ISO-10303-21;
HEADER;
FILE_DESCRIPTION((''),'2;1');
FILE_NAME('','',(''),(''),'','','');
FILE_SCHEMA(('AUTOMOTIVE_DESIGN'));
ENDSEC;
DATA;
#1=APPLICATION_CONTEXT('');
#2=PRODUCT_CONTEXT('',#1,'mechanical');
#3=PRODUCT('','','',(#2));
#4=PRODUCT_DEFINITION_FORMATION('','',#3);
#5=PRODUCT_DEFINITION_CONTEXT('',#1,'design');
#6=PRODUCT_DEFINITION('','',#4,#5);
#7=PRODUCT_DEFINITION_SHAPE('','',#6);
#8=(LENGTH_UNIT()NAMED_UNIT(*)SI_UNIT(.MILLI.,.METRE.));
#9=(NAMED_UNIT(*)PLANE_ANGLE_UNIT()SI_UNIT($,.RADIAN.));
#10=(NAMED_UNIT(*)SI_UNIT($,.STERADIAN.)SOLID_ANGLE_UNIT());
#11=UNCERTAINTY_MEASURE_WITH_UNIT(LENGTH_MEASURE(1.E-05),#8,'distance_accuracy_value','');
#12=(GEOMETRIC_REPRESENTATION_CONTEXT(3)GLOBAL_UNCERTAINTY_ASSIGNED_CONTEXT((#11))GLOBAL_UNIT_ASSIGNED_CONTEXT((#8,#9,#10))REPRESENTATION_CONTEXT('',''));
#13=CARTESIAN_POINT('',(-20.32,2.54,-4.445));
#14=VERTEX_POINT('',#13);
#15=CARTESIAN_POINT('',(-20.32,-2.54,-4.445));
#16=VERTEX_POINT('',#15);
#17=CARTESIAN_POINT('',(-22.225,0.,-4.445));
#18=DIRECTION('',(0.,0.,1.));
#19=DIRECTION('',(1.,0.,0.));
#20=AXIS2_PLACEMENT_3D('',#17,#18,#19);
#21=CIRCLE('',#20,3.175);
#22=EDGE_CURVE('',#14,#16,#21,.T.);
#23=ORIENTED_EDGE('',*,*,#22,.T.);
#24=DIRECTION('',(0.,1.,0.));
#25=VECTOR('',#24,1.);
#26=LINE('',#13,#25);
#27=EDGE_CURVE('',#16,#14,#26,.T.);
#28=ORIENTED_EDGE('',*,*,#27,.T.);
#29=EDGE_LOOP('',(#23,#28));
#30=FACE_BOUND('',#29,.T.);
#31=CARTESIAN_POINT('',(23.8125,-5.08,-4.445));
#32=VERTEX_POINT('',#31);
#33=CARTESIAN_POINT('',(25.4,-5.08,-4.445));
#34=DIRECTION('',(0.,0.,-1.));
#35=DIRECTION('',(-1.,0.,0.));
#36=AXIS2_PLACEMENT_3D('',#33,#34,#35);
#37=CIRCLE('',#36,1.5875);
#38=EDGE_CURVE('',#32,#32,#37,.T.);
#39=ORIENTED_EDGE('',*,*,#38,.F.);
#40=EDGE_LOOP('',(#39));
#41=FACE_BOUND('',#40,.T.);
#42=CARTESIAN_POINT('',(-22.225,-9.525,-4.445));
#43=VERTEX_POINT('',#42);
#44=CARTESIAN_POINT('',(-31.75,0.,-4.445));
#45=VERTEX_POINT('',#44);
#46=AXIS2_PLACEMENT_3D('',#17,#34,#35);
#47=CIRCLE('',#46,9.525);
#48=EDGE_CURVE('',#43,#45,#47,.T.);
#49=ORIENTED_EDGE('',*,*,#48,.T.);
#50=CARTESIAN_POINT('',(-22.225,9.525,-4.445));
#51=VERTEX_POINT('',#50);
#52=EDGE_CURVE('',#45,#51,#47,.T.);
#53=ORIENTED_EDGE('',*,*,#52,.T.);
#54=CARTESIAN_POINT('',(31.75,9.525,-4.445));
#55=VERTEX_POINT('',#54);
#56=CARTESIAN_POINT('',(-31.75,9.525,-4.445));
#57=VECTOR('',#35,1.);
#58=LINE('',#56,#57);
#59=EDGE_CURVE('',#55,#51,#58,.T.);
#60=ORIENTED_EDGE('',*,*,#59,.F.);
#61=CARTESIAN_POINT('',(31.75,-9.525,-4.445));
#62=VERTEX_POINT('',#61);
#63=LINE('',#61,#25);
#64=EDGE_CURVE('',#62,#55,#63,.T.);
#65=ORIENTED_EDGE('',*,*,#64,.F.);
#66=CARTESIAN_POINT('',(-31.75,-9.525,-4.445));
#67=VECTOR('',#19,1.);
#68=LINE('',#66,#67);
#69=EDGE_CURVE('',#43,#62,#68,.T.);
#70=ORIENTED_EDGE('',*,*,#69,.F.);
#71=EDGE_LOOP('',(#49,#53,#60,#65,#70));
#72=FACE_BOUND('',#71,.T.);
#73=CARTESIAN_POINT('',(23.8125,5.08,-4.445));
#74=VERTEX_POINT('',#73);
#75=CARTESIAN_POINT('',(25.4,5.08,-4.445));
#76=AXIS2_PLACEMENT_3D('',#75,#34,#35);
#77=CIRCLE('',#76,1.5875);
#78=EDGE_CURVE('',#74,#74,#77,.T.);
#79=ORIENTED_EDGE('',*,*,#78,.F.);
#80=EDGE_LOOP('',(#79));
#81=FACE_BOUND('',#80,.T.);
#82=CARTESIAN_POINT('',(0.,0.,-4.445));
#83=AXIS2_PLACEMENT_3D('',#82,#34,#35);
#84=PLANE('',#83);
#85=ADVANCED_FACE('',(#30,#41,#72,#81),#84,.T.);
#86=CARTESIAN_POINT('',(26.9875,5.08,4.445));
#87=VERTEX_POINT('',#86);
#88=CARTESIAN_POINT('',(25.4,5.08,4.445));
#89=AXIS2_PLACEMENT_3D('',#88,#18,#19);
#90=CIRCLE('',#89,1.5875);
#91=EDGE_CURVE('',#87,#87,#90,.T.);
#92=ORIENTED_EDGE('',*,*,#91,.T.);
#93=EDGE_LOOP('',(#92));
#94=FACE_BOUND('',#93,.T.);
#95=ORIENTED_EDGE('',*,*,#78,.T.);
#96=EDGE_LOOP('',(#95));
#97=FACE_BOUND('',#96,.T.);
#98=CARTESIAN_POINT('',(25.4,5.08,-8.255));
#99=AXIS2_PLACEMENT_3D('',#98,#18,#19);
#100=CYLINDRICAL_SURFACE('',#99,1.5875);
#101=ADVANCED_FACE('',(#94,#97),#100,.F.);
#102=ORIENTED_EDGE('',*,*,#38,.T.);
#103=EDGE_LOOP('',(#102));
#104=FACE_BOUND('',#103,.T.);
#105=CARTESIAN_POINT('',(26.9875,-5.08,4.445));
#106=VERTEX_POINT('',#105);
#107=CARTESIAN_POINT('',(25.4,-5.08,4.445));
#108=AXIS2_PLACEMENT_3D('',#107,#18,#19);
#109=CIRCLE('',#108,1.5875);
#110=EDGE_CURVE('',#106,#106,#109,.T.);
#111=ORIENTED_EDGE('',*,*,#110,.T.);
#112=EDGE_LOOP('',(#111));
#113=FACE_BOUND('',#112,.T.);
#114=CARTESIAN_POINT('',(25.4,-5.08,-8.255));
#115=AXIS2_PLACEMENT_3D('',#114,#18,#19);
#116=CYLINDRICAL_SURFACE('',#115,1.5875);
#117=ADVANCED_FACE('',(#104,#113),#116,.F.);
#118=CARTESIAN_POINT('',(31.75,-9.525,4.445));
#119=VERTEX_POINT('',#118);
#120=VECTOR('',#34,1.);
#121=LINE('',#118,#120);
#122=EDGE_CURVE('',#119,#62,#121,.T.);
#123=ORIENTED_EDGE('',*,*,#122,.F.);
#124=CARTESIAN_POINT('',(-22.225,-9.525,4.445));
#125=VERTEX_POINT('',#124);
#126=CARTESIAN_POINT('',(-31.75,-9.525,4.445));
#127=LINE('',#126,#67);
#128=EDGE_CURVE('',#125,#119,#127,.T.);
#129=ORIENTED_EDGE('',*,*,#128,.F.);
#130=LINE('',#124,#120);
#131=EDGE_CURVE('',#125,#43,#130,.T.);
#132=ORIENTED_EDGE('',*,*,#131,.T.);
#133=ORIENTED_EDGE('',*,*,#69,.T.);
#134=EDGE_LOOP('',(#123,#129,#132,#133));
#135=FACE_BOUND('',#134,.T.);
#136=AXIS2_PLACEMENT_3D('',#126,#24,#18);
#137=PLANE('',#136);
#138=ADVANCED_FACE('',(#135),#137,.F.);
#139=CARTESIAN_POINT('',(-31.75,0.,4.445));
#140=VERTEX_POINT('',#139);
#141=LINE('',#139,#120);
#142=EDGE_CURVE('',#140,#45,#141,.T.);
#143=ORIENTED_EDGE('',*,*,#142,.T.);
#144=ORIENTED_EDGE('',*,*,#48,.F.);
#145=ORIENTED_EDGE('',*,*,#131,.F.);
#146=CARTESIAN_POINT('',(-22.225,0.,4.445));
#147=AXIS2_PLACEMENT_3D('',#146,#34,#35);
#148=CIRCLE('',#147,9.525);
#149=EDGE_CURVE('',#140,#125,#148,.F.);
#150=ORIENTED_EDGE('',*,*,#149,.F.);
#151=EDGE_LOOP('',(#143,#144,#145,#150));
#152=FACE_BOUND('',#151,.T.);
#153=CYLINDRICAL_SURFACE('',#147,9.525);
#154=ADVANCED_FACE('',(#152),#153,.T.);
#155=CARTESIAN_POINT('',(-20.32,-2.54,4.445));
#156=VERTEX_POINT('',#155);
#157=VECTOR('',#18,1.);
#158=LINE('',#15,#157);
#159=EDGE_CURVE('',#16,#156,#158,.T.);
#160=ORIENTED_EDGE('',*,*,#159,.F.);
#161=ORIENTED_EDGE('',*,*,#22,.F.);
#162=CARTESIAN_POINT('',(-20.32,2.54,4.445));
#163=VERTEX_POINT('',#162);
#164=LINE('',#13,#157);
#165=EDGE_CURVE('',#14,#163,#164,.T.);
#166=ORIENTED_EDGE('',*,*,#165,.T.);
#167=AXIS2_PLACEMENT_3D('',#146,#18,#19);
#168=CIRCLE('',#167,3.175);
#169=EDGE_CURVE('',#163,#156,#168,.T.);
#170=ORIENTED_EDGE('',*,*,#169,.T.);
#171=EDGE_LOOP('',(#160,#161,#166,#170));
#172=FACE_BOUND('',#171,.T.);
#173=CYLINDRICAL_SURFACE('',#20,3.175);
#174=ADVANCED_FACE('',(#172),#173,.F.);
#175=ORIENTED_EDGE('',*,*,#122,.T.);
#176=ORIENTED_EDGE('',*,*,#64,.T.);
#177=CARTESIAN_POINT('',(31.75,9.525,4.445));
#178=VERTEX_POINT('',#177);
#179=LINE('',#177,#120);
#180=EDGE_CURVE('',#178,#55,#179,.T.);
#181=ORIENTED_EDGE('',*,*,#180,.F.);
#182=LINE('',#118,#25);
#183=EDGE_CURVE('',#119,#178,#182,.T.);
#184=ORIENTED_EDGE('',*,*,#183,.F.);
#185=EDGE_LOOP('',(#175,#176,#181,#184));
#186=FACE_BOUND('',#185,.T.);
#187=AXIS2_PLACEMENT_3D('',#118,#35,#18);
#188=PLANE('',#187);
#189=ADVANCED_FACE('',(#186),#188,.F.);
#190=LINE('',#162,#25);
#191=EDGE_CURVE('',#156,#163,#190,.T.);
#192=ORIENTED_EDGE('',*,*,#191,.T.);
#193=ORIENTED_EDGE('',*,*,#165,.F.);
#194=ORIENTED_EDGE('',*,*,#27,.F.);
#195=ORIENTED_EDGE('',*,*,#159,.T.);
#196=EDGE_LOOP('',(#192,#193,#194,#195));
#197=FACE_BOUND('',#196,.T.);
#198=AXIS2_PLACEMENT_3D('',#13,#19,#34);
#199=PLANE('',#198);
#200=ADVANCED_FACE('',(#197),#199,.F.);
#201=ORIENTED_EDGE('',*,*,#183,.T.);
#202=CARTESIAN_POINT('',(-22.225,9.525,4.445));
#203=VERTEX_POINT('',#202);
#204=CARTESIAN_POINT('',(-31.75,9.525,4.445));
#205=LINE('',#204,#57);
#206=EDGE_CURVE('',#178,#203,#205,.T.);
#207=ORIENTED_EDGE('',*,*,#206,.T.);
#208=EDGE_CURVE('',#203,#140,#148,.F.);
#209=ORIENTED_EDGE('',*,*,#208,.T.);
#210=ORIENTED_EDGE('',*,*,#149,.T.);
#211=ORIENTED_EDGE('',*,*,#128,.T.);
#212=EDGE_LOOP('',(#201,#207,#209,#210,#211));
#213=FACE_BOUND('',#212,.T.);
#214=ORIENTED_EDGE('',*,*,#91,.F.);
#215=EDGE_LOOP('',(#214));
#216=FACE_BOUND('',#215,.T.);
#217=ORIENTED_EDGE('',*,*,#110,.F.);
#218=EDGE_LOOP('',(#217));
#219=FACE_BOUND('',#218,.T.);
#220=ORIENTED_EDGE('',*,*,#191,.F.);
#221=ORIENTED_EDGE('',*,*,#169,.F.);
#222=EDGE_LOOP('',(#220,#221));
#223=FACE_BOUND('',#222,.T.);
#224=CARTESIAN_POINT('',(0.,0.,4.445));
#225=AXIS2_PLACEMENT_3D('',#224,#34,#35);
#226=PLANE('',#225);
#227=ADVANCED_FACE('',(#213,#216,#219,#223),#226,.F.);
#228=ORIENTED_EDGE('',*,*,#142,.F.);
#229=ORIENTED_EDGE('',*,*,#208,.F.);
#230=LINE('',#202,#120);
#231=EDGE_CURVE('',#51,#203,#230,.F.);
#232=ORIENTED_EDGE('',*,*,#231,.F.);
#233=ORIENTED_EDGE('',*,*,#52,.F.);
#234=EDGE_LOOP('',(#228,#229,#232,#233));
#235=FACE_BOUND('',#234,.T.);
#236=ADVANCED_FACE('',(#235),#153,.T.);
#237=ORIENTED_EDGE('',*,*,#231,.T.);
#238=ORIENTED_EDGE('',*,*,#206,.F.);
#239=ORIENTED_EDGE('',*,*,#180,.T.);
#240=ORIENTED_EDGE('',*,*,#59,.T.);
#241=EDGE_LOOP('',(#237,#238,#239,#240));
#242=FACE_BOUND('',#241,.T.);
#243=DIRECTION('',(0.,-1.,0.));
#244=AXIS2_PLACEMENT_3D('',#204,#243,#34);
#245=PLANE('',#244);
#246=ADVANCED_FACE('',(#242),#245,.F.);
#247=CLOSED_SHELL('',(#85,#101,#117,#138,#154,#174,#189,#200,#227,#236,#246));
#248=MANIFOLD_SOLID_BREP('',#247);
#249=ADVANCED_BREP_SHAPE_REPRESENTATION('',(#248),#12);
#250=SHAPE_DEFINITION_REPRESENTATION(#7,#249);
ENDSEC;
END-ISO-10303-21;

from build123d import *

# Parameters (mm, degrees)
SKETCH1_W               = 63.5
SKETCH1_H               = 19.05
BOSS_EXTRUDE1_DEPTH     = 4.445
SKETCH2_R               = 1.5875
CUT_EXTRUDE1_DEPTH      = 12.7
FILLET1_R               = 9.525
CUT_EXTRUDE2_DEPTH      = 35.319385557
CUT_EXTRUDE2_DEPTH_BACK = 35.319385557


with BuildPart() as part:
    # Sketch1 → Boss-Extrude1 (new, symmetric)
    with BuildSketch(Plane.XY):
        Rectangle(SKETCH1_W, SKETCH1_H)
    extrude(amount=BOSS_EXTRUDE1_DEPTH, both=True)

    # Sketch2 → Cut-Extrude1 (cut)
    with BuildSketch(Plane.XY.offset(4.445)):
        with Locations((25.4, 5.08)):
            Circle(SKETCH2_R)
        with Locations((25.4, -5.08)):
            Circle(SKETCH2_R)
    extrude(amount=-CUT_EXTRUDE1_DEPTH, mode=Mode.SUBTRACT)

    # Fillet1
    fillet1_edges = [part.edges().sort_by_distance(p)[0] for p in [
        (-31.75, -9.525, 0),
        (-31.75, 9.525, 0),
    ]]
    fillet(fillet1_edges, radius=FILLET1_R - 0.0001)  # a hair under: the kernel refuses the full size

    # Sketch3 → Cut-Extrude2 (cut, two sides: drawn at the far end of the back side and taken through both)
    with BuildSketch(Plane.XY.offset(4.445).offset(-CUT_EXTRUDE2_DEPTH_BACK)):
        with BuildLine():
            Line((-20.32, 2.54), (-20.32, -2.54))
            ThreePointArc((-20.32, -2.54), (-25.4, 0), (-20.32, 2.54))
        make_face()
    extrude(amount=CUT_EXTRUDE2_DEPTH + CUT_EXTRUDE2_DEPTH_BACK, mode=Mode.SUBTRACT)


solid = part.part
